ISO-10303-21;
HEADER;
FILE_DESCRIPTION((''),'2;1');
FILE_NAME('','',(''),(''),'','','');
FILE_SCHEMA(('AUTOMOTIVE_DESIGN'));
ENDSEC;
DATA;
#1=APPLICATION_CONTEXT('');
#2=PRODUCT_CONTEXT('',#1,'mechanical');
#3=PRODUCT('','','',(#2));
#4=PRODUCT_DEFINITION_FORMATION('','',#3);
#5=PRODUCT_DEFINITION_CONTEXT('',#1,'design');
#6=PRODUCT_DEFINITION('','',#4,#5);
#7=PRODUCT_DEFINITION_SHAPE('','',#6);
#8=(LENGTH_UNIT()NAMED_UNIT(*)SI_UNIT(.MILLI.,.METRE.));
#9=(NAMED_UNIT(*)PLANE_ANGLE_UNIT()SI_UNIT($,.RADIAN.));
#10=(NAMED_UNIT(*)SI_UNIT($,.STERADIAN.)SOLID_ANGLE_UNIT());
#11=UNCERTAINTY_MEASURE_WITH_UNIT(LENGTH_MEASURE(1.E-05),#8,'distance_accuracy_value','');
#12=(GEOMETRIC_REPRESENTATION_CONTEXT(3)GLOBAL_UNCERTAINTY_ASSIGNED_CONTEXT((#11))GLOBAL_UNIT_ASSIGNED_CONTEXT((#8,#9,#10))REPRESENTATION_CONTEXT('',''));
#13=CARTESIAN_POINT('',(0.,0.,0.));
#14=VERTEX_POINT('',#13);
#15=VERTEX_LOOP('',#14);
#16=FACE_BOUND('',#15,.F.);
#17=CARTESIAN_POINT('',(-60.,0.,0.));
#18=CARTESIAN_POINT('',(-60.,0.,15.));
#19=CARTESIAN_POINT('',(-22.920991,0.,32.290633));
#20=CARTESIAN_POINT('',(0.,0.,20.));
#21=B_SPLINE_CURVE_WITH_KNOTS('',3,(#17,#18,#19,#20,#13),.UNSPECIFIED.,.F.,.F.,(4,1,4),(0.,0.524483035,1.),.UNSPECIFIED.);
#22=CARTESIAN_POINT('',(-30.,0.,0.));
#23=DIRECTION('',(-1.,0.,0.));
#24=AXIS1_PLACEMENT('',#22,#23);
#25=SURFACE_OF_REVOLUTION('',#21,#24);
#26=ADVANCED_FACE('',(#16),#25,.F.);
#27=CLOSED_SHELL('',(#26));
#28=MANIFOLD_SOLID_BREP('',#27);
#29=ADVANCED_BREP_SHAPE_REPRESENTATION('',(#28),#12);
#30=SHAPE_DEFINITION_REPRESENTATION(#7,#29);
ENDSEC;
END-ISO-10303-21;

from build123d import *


with BuildPart() as f1:
    # F0 (on Front) → F1 (revolve)
    with BuildSketch(Plane.XZ):
        with BuildLine():
            Line((-60, 0), (0, 0))
            add(Edge.make_bspline(
                [(-60, 0), (-60, 15), (-22.9209910094, 32.2906327967), (0, 20), (0, 0)],
                knots=[0, 0, 0, 0, 0.5244830348, 1, 1, 1, 1], degree=3))
        make_face()
    revolve(axis=Axis((-30, 0, 0), (-1, 0, 0)))


solid = f1.part
